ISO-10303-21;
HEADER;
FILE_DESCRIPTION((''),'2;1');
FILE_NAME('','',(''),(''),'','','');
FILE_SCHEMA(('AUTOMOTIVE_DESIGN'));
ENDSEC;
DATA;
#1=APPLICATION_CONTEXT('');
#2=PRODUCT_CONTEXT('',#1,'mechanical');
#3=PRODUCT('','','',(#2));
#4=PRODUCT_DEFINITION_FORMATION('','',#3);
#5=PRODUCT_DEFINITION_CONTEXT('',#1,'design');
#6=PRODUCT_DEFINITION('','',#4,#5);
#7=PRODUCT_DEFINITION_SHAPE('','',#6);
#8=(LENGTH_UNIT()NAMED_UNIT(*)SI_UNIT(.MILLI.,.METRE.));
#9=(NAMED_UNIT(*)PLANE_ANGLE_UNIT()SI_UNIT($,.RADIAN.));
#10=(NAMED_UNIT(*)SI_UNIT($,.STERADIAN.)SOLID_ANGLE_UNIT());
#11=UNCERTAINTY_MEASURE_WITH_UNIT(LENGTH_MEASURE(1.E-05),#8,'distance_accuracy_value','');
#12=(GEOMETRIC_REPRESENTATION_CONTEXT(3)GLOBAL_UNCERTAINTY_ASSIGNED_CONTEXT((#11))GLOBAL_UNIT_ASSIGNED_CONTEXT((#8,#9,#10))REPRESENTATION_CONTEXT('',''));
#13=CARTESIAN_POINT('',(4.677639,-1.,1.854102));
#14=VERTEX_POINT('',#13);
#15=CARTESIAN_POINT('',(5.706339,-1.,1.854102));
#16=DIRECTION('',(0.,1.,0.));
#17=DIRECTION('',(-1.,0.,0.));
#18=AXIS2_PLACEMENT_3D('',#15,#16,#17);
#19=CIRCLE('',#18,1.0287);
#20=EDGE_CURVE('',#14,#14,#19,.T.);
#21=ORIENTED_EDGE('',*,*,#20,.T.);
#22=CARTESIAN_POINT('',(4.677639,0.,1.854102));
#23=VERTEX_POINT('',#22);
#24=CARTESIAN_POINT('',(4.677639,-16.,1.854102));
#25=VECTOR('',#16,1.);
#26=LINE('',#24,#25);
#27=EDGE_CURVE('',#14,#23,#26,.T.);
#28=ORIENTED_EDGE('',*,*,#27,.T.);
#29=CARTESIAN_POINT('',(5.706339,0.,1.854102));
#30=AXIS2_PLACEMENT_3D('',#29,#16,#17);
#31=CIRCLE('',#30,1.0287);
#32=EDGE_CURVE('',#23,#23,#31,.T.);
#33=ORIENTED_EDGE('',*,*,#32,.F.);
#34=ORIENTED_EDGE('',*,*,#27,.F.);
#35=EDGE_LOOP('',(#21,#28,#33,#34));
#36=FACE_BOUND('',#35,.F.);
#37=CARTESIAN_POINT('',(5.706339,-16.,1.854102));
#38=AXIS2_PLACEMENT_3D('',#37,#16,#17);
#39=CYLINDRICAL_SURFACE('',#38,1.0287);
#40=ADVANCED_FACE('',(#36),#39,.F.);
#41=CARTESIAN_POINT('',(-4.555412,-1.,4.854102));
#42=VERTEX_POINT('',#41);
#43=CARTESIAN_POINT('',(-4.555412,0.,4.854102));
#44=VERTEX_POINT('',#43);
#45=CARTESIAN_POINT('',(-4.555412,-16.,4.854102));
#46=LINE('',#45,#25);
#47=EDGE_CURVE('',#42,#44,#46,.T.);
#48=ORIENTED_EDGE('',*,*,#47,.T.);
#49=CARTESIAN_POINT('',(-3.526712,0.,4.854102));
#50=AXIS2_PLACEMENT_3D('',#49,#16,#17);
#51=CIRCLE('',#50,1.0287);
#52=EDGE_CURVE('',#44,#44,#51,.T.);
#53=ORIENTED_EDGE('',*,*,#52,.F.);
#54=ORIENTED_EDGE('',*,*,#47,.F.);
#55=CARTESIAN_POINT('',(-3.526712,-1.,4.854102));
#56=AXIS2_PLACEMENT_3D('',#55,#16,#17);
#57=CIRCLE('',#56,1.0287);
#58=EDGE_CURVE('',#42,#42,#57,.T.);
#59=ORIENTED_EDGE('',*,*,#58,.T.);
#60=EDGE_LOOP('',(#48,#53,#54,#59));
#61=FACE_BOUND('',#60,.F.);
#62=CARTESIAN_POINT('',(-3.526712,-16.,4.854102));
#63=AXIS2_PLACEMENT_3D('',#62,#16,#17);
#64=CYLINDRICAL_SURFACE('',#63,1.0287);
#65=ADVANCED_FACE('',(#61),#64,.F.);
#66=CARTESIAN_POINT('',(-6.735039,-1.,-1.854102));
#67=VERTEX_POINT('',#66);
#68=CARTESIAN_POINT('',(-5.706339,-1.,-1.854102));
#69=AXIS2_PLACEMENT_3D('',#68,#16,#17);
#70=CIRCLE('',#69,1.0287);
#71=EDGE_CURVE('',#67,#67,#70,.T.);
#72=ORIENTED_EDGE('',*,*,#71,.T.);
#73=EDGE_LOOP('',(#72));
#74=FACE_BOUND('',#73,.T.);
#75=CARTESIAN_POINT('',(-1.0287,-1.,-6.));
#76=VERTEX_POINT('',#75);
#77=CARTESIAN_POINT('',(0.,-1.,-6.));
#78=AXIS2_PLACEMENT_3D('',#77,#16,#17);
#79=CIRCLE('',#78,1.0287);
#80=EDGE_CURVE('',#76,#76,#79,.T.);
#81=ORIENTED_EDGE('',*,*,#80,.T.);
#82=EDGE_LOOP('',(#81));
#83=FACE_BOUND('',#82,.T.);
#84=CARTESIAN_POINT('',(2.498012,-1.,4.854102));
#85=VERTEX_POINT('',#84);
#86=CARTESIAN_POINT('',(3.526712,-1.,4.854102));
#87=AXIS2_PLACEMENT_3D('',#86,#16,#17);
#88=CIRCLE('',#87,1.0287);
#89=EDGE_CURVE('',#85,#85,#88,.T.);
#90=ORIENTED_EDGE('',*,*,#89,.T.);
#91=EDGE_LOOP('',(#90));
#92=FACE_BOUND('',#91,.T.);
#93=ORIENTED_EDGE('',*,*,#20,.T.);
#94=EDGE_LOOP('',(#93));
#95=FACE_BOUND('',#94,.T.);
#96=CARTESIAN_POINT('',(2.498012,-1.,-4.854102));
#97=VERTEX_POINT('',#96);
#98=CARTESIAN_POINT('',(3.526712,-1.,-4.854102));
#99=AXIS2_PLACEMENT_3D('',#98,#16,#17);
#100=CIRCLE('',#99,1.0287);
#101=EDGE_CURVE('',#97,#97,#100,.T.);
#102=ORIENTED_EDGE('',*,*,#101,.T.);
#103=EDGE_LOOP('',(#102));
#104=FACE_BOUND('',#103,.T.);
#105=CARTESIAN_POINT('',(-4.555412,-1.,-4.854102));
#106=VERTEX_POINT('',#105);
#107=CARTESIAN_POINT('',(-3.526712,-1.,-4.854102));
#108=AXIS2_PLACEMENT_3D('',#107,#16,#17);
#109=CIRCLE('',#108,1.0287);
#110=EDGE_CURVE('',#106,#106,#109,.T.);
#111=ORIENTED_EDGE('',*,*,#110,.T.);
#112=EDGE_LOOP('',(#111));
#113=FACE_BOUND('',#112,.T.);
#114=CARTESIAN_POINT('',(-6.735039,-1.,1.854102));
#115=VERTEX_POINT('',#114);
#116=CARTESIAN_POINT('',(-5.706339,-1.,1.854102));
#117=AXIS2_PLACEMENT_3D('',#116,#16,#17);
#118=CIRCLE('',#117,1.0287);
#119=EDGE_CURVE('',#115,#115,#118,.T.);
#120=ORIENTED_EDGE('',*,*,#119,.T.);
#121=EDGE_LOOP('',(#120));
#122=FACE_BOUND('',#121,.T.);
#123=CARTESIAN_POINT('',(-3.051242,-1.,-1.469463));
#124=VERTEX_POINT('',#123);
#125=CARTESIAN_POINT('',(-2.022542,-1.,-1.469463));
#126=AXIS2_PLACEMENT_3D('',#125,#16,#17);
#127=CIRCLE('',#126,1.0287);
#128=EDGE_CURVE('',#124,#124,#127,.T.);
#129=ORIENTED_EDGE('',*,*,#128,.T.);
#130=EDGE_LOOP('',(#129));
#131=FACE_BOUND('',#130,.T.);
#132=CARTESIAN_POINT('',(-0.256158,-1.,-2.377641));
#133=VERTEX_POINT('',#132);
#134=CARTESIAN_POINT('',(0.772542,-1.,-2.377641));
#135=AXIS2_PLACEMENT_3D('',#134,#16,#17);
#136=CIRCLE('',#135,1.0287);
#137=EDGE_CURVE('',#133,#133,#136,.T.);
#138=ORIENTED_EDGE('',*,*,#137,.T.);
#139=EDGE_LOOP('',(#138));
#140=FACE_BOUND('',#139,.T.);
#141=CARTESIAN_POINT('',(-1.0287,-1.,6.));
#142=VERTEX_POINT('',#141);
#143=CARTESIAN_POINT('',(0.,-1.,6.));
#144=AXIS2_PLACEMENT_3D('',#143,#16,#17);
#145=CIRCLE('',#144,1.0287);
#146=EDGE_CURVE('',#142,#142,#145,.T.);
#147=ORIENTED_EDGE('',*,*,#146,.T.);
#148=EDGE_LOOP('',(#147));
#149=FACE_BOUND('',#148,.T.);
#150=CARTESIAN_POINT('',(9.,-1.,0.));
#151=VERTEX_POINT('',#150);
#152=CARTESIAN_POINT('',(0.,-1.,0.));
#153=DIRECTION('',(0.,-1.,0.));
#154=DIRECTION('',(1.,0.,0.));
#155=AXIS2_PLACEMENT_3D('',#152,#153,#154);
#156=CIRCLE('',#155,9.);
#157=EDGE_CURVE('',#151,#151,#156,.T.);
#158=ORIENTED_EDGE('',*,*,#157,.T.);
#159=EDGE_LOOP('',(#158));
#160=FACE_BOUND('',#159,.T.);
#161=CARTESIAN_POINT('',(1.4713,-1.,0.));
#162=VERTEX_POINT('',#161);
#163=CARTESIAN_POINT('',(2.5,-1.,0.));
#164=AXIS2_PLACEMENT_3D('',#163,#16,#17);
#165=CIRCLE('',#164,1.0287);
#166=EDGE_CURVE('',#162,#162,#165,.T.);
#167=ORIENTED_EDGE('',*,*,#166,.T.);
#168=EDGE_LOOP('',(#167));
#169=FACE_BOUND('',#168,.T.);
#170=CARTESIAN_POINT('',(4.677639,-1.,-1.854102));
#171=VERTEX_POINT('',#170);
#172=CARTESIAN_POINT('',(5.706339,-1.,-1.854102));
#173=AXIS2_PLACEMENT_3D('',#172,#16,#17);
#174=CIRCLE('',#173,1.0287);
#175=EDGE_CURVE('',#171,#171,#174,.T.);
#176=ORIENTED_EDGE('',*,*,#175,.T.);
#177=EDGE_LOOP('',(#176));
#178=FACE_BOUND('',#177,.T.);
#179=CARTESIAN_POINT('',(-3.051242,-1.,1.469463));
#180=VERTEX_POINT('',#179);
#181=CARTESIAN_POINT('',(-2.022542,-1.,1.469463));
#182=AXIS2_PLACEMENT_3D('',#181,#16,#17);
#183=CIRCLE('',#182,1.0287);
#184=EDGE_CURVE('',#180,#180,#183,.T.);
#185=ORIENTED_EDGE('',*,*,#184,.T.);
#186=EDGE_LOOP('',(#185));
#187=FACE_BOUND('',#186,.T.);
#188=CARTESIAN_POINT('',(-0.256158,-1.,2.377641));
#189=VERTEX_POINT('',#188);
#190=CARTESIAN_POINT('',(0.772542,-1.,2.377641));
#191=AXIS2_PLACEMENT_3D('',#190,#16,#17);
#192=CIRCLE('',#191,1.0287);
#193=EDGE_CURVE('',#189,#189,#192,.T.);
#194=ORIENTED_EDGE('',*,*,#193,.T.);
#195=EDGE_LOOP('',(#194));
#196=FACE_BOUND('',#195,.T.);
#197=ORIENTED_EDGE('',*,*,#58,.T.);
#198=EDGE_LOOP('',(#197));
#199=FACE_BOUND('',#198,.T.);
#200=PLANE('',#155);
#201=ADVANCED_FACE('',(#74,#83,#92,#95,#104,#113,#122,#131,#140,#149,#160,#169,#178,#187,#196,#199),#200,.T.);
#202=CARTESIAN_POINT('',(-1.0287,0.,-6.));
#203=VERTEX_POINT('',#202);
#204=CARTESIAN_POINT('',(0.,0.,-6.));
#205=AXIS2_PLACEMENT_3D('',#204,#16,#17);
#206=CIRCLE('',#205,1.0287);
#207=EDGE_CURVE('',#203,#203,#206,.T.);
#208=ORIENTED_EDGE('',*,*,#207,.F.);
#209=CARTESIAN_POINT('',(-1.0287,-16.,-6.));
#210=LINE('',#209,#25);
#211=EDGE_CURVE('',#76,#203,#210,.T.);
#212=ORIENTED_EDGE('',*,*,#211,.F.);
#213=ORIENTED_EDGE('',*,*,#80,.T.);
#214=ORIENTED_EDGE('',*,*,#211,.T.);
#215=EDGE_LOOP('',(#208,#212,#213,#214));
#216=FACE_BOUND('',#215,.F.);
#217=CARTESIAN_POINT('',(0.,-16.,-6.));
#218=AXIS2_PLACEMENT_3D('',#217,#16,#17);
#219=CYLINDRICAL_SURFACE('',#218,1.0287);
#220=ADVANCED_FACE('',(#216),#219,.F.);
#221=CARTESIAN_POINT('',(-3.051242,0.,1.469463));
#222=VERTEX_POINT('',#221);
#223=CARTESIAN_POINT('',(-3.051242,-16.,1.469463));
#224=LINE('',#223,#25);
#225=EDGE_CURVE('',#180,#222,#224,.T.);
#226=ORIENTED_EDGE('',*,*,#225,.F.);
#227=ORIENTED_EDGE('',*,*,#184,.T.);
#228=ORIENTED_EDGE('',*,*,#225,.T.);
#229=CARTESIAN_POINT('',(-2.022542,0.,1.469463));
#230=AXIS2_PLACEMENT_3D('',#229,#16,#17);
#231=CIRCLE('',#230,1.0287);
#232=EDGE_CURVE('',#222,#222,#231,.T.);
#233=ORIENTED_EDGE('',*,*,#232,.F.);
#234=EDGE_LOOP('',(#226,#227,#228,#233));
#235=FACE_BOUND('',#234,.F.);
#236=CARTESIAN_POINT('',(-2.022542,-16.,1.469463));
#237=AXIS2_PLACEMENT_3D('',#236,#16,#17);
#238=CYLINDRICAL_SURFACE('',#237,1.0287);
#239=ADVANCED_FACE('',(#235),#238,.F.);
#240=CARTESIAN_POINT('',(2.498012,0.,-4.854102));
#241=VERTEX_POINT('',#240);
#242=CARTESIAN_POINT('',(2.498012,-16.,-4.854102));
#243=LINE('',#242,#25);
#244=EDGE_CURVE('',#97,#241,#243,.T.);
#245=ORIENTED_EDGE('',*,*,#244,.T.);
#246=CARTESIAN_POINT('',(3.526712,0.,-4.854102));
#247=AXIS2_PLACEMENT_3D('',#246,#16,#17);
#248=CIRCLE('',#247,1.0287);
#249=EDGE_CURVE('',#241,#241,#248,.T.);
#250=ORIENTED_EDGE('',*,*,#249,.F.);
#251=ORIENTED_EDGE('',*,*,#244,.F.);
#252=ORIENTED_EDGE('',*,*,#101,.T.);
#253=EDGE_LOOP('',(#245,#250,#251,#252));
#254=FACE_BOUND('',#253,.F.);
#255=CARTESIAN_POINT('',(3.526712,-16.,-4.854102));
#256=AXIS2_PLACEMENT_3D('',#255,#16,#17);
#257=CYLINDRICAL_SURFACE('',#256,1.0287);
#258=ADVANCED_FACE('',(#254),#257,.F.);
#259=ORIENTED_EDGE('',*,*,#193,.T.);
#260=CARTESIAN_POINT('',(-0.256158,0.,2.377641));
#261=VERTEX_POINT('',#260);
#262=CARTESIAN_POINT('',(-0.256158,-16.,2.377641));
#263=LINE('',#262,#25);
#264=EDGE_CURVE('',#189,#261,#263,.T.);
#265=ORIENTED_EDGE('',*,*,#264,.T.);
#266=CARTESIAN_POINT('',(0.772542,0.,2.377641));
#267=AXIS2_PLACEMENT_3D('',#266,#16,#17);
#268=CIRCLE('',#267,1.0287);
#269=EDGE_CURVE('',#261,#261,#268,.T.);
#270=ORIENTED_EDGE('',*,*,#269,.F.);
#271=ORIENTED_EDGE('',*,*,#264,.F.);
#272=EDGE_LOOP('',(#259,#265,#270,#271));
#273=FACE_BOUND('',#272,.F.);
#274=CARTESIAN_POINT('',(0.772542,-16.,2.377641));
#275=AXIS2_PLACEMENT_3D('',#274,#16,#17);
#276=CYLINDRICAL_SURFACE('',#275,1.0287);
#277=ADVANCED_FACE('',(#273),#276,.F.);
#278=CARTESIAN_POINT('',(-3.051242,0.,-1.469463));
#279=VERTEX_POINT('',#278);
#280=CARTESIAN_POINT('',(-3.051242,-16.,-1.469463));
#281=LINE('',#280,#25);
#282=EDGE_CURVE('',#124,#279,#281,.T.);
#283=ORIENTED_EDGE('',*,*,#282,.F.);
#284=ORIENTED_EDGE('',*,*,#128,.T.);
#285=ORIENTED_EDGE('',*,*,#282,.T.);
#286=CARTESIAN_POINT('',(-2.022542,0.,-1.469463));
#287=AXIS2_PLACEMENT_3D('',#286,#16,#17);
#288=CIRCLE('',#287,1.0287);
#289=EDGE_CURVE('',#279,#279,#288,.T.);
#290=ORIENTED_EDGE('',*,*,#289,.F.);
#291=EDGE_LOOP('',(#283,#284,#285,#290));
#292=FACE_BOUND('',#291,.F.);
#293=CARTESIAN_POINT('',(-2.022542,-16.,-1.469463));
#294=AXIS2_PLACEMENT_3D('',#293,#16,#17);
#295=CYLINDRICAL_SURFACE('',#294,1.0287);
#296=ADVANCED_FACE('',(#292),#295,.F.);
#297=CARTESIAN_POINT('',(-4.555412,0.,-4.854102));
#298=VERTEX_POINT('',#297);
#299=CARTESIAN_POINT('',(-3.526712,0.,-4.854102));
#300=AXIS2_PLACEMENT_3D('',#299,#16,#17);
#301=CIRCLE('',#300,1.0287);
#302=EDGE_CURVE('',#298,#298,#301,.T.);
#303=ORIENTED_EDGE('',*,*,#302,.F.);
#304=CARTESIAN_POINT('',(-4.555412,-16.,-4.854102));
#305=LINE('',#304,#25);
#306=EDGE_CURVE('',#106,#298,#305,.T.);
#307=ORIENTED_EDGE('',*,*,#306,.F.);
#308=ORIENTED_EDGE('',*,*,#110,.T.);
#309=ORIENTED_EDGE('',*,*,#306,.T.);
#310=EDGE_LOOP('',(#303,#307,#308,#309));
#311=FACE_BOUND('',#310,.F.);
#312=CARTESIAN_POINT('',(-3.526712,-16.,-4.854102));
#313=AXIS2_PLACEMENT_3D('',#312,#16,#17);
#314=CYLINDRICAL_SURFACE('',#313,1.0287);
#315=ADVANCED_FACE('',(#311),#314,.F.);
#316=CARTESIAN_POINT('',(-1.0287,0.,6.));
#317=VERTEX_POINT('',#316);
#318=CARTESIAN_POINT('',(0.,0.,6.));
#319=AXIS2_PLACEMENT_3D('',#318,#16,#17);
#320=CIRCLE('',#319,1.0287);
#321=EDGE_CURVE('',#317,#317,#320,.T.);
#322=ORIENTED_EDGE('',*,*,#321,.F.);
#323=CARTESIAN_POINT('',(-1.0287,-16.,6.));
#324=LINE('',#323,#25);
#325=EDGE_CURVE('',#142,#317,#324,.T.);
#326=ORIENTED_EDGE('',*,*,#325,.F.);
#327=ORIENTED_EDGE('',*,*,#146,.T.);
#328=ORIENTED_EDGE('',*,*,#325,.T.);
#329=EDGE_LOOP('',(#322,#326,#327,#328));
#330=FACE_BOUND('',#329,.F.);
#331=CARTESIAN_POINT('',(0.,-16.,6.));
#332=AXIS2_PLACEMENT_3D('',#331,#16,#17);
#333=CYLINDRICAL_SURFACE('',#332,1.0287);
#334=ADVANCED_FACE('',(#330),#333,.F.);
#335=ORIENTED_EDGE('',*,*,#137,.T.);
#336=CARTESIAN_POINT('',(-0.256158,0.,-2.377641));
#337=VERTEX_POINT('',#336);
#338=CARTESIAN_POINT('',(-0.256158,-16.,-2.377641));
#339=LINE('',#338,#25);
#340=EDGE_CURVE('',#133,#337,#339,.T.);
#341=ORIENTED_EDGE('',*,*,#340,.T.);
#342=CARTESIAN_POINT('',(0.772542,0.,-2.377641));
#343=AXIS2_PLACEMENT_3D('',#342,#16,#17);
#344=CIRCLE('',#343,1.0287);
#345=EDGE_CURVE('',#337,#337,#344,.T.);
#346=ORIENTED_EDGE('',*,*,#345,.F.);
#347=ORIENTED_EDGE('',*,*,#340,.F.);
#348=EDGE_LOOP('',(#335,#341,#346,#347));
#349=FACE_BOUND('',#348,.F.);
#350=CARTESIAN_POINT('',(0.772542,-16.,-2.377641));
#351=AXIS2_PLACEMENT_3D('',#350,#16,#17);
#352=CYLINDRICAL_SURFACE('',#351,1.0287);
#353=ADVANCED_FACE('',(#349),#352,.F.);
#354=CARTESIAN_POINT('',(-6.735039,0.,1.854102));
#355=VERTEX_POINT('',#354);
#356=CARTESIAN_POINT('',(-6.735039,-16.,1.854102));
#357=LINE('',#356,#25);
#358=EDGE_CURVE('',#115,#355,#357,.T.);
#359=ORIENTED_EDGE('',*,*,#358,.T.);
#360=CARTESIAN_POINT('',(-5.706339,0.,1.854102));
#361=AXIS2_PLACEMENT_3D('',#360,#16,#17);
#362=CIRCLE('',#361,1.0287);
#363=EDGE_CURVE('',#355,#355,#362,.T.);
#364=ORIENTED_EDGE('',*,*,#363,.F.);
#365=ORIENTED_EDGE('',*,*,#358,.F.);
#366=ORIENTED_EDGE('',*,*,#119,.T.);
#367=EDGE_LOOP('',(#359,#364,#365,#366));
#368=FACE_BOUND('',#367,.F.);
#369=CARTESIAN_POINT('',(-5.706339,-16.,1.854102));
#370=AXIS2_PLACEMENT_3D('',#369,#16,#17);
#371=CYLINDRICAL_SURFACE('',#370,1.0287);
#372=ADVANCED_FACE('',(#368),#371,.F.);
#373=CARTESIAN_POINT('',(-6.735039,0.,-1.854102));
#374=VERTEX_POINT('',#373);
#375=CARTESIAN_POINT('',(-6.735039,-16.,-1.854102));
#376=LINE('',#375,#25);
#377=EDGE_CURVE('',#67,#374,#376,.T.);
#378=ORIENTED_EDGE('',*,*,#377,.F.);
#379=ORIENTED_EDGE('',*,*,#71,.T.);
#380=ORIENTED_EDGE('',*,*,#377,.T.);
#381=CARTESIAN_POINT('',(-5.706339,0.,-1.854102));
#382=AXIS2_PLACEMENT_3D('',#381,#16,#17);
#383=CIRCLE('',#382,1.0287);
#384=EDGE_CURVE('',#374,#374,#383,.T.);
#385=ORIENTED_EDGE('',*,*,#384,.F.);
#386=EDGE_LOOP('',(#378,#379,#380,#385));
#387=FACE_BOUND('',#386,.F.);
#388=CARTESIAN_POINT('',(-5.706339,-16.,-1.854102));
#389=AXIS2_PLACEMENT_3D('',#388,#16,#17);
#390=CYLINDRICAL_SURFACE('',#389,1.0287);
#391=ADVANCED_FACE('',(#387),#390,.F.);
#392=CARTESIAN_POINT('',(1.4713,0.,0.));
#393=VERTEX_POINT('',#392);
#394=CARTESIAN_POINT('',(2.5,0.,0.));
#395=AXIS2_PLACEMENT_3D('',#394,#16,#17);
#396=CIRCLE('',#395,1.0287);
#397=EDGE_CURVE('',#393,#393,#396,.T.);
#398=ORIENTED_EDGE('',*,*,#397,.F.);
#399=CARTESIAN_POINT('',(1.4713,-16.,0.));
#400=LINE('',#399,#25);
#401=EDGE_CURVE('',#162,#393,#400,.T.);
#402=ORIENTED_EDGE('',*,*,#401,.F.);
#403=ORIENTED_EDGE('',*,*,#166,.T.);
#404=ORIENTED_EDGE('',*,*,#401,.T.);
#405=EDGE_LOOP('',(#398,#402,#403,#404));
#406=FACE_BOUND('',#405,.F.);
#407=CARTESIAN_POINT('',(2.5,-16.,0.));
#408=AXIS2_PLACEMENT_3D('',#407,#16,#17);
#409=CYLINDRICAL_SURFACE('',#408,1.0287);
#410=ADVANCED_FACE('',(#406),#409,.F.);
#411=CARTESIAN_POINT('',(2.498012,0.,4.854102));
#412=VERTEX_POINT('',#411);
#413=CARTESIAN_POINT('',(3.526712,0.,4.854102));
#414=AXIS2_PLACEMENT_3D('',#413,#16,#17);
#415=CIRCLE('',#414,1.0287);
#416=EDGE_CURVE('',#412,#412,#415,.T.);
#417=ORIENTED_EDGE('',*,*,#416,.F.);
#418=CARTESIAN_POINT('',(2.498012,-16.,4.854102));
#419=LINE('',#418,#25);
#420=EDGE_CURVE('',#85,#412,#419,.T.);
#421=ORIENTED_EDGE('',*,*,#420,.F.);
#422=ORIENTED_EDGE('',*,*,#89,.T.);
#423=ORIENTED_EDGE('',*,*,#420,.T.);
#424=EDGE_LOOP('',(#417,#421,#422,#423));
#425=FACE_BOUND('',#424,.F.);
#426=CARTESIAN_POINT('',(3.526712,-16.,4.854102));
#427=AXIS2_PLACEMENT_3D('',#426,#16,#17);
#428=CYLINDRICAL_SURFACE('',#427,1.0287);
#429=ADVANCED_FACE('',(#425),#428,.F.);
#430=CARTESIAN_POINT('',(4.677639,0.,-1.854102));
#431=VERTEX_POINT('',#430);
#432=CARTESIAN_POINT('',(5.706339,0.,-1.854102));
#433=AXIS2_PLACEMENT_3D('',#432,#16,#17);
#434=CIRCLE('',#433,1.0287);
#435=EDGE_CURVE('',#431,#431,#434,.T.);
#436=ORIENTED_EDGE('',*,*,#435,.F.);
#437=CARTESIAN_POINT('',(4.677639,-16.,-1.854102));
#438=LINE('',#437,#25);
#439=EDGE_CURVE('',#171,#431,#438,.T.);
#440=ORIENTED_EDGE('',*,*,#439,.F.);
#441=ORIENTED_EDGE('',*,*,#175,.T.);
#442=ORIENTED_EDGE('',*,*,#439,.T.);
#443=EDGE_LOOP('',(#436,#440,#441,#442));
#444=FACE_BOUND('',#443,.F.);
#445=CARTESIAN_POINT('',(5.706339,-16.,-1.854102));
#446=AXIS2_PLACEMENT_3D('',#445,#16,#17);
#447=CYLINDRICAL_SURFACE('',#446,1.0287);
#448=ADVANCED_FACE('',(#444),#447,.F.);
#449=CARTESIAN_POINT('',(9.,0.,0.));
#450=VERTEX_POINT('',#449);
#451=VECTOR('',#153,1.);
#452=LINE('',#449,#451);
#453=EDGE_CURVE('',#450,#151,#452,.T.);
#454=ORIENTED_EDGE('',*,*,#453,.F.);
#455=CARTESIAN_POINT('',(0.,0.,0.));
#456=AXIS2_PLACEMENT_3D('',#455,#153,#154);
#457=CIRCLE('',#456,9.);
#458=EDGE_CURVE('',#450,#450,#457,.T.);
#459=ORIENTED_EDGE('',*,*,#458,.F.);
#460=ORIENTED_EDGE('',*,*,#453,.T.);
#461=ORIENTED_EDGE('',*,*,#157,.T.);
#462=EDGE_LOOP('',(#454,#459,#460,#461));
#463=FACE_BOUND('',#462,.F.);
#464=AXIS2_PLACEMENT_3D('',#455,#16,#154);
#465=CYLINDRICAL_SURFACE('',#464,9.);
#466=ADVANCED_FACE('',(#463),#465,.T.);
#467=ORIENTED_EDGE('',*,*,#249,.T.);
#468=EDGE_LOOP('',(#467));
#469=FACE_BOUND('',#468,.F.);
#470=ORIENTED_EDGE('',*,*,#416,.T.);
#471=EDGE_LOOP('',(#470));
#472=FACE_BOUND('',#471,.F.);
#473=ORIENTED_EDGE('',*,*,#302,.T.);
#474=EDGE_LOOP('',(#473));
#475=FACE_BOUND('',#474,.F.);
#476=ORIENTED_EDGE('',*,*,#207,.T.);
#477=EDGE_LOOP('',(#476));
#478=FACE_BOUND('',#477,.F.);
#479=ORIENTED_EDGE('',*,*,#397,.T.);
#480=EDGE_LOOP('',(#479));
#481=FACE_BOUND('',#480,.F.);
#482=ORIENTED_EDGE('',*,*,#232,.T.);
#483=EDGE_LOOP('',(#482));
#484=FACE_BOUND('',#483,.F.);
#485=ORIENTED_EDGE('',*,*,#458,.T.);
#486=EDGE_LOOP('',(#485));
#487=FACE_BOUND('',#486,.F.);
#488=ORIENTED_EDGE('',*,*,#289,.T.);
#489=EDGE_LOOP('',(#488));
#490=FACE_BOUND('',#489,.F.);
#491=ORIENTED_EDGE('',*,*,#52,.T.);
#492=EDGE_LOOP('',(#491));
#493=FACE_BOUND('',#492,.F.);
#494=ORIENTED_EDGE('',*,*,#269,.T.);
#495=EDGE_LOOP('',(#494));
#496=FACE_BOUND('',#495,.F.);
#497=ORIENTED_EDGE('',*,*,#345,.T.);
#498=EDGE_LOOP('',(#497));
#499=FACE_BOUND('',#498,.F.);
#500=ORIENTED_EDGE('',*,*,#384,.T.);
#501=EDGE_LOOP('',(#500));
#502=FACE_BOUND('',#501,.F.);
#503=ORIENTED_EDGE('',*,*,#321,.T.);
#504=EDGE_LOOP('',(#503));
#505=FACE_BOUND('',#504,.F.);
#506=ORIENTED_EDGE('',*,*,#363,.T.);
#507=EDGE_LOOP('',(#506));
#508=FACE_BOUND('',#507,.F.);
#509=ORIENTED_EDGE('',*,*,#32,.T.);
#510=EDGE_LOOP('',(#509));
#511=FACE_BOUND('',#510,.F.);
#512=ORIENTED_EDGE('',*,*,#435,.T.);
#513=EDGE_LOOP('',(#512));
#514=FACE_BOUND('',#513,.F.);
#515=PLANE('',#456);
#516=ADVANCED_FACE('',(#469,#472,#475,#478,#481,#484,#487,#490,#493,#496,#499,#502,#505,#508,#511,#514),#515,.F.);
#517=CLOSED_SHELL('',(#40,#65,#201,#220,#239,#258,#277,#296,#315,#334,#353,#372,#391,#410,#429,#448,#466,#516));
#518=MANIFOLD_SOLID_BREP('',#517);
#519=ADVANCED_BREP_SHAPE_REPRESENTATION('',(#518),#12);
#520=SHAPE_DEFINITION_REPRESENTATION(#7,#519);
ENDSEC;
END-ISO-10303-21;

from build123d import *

# Parameters (mm, degrees)
F0_R     = 9
F1_DEPTH = 1
F3_D     = 2.0574
F3_DEPTH = 15
F3_TIP   = 0.6181053188


# Not quite as in the source:
# - a feature names something its author has since deleted; it is built from what else it names


with BuildPart() as f1:
    # F0 (on Front) → F1 (new body)
    with BuildSketch(Plane.XZ):
        Circle(F0_R)
    extrude(amount=F1_DEPTH)

    # F3
    with Locations(Plane.XZ.offset(1)):
        with Locations((-3.5267115138, 4.8541019662), (-5.7063390978, 1.8541019662), (-5.7063390978, -1.8541019662), (-3.5267115138, -4.8541019662), (0, -6), (3.5267115138, -4.8541019662), (5.7063390978, -1.8541019662), (0, 6), (-2.0225424859, 1.4694631307), (-2.0225424859, -1.4694631307), (0.7725424859, -2.3776412907), (2.5, 0), (0.7725424859, 2.3776412907), (3.5267115138, 4.8541019662), (5.7063390978, 1.8541019662)):
            Hole(F3_D / 2, depth=F3_DEPTH)
            with Locations((0, 0, -(F3_DEPTH + F3_TIP / 2))):  # 118° drill point
                Cone(0, F3_D / 2, F3_TIP, mode=Mode.SUBTRACT)


solid = f1.part
